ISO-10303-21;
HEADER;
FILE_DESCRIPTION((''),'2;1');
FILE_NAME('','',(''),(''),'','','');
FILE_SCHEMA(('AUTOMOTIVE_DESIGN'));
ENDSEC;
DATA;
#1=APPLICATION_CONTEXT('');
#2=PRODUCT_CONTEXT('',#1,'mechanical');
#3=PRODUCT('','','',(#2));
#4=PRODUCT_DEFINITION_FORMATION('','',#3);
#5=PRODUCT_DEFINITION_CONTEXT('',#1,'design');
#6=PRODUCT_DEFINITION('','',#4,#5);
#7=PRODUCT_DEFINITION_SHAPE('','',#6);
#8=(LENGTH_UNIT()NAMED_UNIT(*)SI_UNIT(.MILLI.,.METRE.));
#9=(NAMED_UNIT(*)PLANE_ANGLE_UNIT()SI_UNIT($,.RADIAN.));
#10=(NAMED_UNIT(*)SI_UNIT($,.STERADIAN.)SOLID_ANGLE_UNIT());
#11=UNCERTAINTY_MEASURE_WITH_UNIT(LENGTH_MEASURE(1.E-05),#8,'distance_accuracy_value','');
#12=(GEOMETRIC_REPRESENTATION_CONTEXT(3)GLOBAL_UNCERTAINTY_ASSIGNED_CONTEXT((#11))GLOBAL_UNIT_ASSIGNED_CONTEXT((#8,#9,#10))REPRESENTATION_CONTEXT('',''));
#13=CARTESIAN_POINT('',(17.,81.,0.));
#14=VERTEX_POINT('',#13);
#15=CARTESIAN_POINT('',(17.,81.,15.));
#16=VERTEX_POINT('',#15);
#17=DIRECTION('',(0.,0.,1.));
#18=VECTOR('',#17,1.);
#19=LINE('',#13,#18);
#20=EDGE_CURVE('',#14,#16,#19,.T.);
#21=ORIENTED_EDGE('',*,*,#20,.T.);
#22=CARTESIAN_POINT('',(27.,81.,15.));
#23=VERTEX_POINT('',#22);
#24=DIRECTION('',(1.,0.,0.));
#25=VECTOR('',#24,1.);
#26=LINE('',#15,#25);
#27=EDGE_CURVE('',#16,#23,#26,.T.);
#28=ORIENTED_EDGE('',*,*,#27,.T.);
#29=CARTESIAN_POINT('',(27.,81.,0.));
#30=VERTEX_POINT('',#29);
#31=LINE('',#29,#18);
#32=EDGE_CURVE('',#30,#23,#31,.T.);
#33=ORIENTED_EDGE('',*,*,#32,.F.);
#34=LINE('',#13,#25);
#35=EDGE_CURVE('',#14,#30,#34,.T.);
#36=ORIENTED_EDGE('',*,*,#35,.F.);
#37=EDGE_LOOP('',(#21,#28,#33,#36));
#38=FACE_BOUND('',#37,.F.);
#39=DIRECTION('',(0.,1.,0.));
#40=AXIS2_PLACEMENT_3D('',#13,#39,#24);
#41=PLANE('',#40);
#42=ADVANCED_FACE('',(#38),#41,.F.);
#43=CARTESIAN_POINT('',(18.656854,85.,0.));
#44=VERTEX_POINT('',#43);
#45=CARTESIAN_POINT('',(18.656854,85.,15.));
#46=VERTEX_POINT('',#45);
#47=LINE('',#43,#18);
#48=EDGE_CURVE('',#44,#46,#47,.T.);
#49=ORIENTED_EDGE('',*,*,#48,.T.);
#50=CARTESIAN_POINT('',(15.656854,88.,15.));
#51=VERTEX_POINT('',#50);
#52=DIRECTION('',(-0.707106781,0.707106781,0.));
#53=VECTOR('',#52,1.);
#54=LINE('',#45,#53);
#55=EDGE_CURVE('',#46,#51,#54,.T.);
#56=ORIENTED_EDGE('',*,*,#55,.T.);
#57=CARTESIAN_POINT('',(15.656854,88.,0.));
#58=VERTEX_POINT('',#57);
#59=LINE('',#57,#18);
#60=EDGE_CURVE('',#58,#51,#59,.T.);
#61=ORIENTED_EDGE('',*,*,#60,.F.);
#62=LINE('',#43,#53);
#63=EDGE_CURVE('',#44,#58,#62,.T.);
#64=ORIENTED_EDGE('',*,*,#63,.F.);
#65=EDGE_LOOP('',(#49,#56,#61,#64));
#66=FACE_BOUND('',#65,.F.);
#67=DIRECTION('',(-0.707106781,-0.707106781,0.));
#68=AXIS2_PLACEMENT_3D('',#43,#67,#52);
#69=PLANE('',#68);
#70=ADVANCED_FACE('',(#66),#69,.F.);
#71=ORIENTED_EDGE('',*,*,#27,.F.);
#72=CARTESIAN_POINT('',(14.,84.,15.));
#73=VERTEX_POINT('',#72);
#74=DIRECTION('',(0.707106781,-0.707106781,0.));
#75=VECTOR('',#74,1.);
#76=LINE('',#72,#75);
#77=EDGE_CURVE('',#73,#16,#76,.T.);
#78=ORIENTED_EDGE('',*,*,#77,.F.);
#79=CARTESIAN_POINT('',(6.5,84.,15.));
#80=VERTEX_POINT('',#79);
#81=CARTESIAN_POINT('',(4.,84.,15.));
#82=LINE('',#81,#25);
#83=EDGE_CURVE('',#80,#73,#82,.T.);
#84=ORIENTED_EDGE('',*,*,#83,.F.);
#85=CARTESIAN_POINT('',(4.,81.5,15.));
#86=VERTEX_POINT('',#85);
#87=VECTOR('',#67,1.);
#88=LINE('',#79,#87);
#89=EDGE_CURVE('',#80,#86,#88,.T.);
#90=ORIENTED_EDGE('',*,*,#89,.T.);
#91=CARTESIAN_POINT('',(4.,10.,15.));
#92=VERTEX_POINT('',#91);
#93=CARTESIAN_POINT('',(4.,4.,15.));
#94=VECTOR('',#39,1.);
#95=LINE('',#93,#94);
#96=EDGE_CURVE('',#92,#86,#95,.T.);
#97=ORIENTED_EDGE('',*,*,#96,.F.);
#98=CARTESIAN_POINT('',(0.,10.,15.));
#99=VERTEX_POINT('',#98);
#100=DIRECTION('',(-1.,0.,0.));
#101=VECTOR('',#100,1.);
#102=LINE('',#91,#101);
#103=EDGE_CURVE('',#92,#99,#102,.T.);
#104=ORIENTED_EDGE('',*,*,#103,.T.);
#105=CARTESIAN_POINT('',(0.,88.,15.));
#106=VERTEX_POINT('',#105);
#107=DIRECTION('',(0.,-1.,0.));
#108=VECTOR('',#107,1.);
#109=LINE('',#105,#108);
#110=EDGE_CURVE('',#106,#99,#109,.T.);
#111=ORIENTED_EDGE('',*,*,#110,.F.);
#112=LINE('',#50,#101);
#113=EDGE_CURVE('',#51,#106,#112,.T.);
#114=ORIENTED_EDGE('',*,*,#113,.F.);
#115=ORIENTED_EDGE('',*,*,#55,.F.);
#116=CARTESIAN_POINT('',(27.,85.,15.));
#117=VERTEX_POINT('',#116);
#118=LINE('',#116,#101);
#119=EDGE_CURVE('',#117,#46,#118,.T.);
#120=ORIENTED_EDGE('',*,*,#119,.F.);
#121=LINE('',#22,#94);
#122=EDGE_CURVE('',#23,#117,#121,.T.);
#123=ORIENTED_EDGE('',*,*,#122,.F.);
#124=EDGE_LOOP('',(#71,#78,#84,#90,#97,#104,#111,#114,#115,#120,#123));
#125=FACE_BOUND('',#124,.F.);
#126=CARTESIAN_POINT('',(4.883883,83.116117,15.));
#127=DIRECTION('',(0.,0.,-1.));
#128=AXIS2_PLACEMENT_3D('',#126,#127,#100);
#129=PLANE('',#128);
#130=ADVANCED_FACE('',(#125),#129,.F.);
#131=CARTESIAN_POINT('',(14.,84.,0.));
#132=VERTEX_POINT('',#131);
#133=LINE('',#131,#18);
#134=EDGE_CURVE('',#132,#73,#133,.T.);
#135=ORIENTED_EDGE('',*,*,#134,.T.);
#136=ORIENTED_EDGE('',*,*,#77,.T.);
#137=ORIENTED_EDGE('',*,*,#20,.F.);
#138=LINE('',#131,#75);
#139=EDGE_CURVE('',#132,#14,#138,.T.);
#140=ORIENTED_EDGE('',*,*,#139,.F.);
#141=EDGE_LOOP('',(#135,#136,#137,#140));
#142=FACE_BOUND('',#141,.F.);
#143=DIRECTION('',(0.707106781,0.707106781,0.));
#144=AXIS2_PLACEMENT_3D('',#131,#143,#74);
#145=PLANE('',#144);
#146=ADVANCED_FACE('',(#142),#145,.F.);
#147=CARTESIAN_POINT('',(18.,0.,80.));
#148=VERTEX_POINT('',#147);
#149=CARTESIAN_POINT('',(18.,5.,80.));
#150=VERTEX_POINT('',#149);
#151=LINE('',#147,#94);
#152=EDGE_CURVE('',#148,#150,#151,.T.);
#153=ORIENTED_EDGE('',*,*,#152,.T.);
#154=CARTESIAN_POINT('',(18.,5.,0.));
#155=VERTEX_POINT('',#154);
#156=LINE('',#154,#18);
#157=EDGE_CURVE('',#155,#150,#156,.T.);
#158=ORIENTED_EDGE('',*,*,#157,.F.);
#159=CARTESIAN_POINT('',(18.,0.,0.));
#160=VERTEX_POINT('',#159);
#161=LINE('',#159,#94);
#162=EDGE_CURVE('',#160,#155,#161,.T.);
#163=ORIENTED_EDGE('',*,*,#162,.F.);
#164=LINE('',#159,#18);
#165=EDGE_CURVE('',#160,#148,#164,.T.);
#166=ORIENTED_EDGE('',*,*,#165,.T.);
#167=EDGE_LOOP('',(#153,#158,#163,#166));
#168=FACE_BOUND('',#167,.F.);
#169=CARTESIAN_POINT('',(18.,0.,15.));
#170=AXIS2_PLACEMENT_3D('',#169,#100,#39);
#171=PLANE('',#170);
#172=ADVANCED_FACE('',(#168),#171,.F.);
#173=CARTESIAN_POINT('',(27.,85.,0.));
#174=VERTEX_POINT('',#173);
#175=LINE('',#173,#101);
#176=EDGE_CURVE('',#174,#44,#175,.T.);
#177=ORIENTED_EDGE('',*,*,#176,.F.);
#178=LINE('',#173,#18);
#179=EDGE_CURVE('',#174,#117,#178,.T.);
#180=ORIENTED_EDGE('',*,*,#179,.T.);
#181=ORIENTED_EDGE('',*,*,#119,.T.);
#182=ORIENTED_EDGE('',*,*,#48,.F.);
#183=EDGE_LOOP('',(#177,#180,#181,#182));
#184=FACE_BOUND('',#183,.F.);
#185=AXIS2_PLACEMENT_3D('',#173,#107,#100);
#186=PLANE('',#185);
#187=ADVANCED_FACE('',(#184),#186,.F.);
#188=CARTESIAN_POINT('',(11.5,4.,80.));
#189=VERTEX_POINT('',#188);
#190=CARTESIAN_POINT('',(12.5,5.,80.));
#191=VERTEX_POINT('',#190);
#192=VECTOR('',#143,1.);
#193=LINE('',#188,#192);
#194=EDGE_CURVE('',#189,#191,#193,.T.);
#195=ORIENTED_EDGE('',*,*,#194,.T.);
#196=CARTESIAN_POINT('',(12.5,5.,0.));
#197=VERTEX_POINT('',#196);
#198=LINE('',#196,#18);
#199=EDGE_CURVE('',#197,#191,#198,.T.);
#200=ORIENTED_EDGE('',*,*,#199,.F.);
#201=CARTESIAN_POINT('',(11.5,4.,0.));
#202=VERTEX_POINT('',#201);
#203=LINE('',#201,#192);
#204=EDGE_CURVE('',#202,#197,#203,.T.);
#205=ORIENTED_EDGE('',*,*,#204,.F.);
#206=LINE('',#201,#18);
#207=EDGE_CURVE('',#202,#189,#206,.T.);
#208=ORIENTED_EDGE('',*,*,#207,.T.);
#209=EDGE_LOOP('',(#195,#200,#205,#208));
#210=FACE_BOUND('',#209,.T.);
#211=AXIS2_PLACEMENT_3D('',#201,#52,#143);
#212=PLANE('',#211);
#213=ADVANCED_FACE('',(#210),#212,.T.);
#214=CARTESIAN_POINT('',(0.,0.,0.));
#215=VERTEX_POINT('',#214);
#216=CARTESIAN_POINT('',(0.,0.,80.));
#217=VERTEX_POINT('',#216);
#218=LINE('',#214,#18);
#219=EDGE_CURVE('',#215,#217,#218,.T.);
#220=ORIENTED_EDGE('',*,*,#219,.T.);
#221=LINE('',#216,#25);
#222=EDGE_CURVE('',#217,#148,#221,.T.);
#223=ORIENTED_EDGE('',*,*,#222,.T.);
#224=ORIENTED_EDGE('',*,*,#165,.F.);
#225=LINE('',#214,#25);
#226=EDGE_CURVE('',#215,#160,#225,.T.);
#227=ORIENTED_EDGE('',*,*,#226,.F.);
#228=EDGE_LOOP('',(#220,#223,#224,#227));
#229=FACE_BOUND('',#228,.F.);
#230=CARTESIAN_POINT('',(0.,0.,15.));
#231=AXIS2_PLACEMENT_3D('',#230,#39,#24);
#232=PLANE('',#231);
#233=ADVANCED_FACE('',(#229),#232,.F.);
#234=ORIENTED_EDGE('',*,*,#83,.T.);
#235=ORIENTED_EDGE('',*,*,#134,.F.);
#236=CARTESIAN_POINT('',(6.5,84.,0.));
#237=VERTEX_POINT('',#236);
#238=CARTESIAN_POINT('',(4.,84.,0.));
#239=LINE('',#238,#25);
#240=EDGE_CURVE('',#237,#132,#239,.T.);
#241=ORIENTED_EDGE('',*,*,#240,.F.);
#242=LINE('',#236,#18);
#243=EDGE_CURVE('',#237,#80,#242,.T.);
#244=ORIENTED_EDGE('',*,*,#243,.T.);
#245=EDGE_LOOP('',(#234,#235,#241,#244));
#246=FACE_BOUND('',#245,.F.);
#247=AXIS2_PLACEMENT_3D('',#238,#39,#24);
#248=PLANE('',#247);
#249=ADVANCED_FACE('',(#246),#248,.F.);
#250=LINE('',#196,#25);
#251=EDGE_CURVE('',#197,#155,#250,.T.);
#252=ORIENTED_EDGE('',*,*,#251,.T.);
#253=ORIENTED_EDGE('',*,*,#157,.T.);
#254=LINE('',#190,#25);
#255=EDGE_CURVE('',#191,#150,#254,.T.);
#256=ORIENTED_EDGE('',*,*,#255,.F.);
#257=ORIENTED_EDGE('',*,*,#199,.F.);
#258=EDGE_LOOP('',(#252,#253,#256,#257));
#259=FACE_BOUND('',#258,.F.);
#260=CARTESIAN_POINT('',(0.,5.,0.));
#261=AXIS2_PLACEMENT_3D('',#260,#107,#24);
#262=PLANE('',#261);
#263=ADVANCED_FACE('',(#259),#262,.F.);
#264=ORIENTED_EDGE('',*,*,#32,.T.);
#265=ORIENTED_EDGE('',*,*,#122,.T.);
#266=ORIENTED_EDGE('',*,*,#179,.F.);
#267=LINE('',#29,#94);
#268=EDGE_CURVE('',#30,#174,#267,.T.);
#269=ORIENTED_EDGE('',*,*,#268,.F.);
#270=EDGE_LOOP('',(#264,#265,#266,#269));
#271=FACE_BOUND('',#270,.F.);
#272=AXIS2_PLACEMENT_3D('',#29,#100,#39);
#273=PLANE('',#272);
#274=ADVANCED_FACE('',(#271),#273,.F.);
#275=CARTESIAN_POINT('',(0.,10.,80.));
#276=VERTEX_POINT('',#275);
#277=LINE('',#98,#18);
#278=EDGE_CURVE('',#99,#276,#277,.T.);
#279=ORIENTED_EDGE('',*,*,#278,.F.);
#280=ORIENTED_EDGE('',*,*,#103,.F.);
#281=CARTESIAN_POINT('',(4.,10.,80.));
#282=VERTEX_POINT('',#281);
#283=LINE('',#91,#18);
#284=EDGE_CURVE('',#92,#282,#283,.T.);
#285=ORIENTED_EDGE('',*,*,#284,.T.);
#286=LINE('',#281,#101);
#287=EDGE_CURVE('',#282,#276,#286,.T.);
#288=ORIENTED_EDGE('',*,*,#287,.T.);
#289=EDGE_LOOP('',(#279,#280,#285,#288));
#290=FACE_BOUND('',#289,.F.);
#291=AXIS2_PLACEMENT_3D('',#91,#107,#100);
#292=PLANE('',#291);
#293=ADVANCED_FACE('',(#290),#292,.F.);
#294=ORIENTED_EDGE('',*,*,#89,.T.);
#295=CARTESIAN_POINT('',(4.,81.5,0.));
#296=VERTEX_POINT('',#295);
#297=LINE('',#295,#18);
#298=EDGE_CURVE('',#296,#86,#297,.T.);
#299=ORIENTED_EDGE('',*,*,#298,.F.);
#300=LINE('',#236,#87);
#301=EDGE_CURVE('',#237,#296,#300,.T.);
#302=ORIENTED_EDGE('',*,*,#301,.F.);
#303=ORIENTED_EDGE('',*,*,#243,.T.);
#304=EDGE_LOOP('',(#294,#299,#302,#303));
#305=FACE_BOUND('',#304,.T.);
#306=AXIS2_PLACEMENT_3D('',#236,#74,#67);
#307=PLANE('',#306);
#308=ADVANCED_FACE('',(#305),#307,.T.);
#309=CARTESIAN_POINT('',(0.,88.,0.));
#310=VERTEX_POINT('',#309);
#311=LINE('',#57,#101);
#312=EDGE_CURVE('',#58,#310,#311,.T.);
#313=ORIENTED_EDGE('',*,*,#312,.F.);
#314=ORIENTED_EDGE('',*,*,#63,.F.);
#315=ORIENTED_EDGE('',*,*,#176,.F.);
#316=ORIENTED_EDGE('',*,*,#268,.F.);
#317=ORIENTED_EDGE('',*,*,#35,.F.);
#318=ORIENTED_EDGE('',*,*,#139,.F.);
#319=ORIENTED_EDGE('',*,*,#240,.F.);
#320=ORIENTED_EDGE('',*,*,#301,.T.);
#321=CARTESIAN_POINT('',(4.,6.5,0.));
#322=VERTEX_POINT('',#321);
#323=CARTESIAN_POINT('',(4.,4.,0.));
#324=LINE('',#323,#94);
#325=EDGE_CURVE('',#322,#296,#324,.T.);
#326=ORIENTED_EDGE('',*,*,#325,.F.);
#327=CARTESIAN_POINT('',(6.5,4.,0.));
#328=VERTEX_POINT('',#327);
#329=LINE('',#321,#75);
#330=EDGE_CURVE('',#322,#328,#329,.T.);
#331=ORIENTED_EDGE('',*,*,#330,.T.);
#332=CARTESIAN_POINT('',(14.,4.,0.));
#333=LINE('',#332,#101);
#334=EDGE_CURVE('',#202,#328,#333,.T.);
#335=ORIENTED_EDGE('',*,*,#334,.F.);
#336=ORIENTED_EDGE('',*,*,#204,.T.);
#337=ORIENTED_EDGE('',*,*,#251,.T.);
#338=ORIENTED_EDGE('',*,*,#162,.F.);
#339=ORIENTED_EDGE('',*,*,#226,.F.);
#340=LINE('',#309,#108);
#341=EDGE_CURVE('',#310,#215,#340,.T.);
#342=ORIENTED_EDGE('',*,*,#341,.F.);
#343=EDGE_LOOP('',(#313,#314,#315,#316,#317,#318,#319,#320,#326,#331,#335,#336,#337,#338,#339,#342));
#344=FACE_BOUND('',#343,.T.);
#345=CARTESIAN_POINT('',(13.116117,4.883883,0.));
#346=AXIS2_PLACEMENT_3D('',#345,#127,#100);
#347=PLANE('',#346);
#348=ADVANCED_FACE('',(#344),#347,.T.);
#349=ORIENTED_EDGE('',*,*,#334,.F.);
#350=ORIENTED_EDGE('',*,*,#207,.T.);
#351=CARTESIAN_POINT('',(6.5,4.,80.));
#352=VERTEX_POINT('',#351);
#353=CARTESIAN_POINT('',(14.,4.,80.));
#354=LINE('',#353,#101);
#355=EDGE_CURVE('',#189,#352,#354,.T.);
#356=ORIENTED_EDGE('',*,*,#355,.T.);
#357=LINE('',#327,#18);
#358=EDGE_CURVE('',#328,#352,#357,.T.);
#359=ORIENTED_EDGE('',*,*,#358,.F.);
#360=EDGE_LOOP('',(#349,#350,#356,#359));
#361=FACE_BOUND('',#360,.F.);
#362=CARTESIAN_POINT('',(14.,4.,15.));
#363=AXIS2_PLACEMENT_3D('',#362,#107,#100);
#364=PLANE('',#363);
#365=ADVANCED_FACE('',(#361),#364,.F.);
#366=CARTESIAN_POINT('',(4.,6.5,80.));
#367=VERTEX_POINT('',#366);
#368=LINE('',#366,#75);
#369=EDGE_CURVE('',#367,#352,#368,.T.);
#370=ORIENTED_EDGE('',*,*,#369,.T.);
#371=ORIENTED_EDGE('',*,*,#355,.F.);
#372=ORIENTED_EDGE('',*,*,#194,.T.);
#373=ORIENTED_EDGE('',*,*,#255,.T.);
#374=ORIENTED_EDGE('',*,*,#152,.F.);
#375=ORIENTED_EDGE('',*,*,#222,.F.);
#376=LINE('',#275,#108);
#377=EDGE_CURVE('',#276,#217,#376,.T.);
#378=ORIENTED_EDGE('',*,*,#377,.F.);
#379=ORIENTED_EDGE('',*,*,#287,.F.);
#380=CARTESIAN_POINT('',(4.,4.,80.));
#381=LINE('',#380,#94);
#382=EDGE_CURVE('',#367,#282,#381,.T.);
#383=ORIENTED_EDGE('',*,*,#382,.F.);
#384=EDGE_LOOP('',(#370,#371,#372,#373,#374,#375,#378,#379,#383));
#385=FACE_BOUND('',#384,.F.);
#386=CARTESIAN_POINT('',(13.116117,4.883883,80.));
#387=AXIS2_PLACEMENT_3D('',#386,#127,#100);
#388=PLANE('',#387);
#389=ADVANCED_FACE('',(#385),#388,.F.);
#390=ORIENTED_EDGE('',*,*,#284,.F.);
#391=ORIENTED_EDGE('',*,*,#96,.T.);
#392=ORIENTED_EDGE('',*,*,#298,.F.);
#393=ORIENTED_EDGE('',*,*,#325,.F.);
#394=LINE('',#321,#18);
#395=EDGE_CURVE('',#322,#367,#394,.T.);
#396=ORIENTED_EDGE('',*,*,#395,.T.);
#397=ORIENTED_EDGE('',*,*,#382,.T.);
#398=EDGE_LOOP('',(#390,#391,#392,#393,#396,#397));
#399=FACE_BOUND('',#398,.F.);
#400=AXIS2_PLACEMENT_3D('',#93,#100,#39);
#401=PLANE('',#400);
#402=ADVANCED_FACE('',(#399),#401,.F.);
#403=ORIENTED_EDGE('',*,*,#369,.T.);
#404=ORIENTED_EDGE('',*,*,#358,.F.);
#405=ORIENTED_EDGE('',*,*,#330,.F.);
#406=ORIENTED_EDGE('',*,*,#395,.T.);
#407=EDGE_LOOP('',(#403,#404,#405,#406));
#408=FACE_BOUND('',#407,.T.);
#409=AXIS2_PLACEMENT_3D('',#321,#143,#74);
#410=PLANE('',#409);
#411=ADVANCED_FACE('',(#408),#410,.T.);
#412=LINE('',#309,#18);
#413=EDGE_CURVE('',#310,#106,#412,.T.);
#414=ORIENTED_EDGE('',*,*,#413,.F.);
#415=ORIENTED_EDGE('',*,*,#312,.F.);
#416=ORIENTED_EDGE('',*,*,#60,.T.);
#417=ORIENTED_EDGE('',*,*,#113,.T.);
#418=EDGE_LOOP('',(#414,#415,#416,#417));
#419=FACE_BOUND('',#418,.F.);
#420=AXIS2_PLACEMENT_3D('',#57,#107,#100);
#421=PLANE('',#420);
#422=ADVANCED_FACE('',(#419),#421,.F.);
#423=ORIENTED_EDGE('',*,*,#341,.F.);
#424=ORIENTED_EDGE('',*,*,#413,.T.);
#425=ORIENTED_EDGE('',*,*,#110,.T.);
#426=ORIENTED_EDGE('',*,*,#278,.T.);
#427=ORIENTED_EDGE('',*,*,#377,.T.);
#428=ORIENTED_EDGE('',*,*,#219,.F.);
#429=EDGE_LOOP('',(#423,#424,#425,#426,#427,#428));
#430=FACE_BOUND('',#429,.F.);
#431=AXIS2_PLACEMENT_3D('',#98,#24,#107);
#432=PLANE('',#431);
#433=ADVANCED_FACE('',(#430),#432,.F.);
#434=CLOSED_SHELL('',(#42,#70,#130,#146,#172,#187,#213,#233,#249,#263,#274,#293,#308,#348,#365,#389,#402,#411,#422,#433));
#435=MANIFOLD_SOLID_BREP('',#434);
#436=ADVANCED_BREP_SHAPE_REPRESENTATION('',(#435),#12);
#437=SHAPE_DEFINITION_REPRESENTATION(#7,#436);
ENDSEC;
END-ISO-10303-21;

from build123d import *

# Parameters (mm, degrees)
F1_DEPTH    = 15
F3_DEPTH    = 65
F4_T1_DEPTH = 15
F4_T3_DEPTH = 80
F4_T8_DEPTH = 80


# Not quite as in the source:
# - a fillet or chamfer that OpenCascade refuses, or shapes differently, is made with other operations: its cross-section is extruded or revolved along the edge and cut away or added
# - a feature names something its author has since deleted; it is built from what else it names


with BuildPart() as f1:
    # F0 (on Top) → F1 (new body)
    with BuildSketch(Plane.XY):
        Polygon((0, 88), (0, 0), (18, 0), (18, 5), (14, 5), (14, 4), (4, 4), (4, 84), (14, 84), (17, 81), (27, 81), (27, 85), (18.6568542495, 85), (15.6568542495, 88), align=None)
    extrude(amount=F1_DEPTH)

    # F2 (on face) → F3 (join)
    with BuildSketch(Plane.XY.offset(15)):
        Polygon((4, 10), (0, 10), (0, 0), (18, 0), (18, 5), (14, 5), (14, 4), (4, 4), align=None)
    extrude(amount=F3_DEPTH)

    # F4: chamfer of 2.5 on 3 edges, made by hand

    # F4_s2 → F4_t1 (join)
    with BuildSketch(Plane.XY):
        Polygon((6.5, 84), (4, 81.5), (4, 84), align=None)
    extrude(amount=F4_T1_DEPTH)

    # F4_s4 → F4_t3 (join)
    with BuildSketch(Plane.XY):
        Polygon((4, 6.5), (6.5, 4), (4, 4), align=None)
    extrude(amount=F4_T3_DEPTH)


with BuildPart() as f4_tool6:
    # F4_s7 → F4_t8 (new body)
    with BuildSketch(Plane.XY):
        Polygon((11.5, 4), (14, 6.5), (14, 4), align=None)
    extrude(amount=F4_T8_DEPTH)

    split(bisect_by=Plane.XZ.offset(-5), keep=Keep.TOP)


with BuildPart() as f1_1:
    add(f1.part)

    # F4_t5: union F4_tool6
    add(f4_tool6.part)


solid = f1_1.part
